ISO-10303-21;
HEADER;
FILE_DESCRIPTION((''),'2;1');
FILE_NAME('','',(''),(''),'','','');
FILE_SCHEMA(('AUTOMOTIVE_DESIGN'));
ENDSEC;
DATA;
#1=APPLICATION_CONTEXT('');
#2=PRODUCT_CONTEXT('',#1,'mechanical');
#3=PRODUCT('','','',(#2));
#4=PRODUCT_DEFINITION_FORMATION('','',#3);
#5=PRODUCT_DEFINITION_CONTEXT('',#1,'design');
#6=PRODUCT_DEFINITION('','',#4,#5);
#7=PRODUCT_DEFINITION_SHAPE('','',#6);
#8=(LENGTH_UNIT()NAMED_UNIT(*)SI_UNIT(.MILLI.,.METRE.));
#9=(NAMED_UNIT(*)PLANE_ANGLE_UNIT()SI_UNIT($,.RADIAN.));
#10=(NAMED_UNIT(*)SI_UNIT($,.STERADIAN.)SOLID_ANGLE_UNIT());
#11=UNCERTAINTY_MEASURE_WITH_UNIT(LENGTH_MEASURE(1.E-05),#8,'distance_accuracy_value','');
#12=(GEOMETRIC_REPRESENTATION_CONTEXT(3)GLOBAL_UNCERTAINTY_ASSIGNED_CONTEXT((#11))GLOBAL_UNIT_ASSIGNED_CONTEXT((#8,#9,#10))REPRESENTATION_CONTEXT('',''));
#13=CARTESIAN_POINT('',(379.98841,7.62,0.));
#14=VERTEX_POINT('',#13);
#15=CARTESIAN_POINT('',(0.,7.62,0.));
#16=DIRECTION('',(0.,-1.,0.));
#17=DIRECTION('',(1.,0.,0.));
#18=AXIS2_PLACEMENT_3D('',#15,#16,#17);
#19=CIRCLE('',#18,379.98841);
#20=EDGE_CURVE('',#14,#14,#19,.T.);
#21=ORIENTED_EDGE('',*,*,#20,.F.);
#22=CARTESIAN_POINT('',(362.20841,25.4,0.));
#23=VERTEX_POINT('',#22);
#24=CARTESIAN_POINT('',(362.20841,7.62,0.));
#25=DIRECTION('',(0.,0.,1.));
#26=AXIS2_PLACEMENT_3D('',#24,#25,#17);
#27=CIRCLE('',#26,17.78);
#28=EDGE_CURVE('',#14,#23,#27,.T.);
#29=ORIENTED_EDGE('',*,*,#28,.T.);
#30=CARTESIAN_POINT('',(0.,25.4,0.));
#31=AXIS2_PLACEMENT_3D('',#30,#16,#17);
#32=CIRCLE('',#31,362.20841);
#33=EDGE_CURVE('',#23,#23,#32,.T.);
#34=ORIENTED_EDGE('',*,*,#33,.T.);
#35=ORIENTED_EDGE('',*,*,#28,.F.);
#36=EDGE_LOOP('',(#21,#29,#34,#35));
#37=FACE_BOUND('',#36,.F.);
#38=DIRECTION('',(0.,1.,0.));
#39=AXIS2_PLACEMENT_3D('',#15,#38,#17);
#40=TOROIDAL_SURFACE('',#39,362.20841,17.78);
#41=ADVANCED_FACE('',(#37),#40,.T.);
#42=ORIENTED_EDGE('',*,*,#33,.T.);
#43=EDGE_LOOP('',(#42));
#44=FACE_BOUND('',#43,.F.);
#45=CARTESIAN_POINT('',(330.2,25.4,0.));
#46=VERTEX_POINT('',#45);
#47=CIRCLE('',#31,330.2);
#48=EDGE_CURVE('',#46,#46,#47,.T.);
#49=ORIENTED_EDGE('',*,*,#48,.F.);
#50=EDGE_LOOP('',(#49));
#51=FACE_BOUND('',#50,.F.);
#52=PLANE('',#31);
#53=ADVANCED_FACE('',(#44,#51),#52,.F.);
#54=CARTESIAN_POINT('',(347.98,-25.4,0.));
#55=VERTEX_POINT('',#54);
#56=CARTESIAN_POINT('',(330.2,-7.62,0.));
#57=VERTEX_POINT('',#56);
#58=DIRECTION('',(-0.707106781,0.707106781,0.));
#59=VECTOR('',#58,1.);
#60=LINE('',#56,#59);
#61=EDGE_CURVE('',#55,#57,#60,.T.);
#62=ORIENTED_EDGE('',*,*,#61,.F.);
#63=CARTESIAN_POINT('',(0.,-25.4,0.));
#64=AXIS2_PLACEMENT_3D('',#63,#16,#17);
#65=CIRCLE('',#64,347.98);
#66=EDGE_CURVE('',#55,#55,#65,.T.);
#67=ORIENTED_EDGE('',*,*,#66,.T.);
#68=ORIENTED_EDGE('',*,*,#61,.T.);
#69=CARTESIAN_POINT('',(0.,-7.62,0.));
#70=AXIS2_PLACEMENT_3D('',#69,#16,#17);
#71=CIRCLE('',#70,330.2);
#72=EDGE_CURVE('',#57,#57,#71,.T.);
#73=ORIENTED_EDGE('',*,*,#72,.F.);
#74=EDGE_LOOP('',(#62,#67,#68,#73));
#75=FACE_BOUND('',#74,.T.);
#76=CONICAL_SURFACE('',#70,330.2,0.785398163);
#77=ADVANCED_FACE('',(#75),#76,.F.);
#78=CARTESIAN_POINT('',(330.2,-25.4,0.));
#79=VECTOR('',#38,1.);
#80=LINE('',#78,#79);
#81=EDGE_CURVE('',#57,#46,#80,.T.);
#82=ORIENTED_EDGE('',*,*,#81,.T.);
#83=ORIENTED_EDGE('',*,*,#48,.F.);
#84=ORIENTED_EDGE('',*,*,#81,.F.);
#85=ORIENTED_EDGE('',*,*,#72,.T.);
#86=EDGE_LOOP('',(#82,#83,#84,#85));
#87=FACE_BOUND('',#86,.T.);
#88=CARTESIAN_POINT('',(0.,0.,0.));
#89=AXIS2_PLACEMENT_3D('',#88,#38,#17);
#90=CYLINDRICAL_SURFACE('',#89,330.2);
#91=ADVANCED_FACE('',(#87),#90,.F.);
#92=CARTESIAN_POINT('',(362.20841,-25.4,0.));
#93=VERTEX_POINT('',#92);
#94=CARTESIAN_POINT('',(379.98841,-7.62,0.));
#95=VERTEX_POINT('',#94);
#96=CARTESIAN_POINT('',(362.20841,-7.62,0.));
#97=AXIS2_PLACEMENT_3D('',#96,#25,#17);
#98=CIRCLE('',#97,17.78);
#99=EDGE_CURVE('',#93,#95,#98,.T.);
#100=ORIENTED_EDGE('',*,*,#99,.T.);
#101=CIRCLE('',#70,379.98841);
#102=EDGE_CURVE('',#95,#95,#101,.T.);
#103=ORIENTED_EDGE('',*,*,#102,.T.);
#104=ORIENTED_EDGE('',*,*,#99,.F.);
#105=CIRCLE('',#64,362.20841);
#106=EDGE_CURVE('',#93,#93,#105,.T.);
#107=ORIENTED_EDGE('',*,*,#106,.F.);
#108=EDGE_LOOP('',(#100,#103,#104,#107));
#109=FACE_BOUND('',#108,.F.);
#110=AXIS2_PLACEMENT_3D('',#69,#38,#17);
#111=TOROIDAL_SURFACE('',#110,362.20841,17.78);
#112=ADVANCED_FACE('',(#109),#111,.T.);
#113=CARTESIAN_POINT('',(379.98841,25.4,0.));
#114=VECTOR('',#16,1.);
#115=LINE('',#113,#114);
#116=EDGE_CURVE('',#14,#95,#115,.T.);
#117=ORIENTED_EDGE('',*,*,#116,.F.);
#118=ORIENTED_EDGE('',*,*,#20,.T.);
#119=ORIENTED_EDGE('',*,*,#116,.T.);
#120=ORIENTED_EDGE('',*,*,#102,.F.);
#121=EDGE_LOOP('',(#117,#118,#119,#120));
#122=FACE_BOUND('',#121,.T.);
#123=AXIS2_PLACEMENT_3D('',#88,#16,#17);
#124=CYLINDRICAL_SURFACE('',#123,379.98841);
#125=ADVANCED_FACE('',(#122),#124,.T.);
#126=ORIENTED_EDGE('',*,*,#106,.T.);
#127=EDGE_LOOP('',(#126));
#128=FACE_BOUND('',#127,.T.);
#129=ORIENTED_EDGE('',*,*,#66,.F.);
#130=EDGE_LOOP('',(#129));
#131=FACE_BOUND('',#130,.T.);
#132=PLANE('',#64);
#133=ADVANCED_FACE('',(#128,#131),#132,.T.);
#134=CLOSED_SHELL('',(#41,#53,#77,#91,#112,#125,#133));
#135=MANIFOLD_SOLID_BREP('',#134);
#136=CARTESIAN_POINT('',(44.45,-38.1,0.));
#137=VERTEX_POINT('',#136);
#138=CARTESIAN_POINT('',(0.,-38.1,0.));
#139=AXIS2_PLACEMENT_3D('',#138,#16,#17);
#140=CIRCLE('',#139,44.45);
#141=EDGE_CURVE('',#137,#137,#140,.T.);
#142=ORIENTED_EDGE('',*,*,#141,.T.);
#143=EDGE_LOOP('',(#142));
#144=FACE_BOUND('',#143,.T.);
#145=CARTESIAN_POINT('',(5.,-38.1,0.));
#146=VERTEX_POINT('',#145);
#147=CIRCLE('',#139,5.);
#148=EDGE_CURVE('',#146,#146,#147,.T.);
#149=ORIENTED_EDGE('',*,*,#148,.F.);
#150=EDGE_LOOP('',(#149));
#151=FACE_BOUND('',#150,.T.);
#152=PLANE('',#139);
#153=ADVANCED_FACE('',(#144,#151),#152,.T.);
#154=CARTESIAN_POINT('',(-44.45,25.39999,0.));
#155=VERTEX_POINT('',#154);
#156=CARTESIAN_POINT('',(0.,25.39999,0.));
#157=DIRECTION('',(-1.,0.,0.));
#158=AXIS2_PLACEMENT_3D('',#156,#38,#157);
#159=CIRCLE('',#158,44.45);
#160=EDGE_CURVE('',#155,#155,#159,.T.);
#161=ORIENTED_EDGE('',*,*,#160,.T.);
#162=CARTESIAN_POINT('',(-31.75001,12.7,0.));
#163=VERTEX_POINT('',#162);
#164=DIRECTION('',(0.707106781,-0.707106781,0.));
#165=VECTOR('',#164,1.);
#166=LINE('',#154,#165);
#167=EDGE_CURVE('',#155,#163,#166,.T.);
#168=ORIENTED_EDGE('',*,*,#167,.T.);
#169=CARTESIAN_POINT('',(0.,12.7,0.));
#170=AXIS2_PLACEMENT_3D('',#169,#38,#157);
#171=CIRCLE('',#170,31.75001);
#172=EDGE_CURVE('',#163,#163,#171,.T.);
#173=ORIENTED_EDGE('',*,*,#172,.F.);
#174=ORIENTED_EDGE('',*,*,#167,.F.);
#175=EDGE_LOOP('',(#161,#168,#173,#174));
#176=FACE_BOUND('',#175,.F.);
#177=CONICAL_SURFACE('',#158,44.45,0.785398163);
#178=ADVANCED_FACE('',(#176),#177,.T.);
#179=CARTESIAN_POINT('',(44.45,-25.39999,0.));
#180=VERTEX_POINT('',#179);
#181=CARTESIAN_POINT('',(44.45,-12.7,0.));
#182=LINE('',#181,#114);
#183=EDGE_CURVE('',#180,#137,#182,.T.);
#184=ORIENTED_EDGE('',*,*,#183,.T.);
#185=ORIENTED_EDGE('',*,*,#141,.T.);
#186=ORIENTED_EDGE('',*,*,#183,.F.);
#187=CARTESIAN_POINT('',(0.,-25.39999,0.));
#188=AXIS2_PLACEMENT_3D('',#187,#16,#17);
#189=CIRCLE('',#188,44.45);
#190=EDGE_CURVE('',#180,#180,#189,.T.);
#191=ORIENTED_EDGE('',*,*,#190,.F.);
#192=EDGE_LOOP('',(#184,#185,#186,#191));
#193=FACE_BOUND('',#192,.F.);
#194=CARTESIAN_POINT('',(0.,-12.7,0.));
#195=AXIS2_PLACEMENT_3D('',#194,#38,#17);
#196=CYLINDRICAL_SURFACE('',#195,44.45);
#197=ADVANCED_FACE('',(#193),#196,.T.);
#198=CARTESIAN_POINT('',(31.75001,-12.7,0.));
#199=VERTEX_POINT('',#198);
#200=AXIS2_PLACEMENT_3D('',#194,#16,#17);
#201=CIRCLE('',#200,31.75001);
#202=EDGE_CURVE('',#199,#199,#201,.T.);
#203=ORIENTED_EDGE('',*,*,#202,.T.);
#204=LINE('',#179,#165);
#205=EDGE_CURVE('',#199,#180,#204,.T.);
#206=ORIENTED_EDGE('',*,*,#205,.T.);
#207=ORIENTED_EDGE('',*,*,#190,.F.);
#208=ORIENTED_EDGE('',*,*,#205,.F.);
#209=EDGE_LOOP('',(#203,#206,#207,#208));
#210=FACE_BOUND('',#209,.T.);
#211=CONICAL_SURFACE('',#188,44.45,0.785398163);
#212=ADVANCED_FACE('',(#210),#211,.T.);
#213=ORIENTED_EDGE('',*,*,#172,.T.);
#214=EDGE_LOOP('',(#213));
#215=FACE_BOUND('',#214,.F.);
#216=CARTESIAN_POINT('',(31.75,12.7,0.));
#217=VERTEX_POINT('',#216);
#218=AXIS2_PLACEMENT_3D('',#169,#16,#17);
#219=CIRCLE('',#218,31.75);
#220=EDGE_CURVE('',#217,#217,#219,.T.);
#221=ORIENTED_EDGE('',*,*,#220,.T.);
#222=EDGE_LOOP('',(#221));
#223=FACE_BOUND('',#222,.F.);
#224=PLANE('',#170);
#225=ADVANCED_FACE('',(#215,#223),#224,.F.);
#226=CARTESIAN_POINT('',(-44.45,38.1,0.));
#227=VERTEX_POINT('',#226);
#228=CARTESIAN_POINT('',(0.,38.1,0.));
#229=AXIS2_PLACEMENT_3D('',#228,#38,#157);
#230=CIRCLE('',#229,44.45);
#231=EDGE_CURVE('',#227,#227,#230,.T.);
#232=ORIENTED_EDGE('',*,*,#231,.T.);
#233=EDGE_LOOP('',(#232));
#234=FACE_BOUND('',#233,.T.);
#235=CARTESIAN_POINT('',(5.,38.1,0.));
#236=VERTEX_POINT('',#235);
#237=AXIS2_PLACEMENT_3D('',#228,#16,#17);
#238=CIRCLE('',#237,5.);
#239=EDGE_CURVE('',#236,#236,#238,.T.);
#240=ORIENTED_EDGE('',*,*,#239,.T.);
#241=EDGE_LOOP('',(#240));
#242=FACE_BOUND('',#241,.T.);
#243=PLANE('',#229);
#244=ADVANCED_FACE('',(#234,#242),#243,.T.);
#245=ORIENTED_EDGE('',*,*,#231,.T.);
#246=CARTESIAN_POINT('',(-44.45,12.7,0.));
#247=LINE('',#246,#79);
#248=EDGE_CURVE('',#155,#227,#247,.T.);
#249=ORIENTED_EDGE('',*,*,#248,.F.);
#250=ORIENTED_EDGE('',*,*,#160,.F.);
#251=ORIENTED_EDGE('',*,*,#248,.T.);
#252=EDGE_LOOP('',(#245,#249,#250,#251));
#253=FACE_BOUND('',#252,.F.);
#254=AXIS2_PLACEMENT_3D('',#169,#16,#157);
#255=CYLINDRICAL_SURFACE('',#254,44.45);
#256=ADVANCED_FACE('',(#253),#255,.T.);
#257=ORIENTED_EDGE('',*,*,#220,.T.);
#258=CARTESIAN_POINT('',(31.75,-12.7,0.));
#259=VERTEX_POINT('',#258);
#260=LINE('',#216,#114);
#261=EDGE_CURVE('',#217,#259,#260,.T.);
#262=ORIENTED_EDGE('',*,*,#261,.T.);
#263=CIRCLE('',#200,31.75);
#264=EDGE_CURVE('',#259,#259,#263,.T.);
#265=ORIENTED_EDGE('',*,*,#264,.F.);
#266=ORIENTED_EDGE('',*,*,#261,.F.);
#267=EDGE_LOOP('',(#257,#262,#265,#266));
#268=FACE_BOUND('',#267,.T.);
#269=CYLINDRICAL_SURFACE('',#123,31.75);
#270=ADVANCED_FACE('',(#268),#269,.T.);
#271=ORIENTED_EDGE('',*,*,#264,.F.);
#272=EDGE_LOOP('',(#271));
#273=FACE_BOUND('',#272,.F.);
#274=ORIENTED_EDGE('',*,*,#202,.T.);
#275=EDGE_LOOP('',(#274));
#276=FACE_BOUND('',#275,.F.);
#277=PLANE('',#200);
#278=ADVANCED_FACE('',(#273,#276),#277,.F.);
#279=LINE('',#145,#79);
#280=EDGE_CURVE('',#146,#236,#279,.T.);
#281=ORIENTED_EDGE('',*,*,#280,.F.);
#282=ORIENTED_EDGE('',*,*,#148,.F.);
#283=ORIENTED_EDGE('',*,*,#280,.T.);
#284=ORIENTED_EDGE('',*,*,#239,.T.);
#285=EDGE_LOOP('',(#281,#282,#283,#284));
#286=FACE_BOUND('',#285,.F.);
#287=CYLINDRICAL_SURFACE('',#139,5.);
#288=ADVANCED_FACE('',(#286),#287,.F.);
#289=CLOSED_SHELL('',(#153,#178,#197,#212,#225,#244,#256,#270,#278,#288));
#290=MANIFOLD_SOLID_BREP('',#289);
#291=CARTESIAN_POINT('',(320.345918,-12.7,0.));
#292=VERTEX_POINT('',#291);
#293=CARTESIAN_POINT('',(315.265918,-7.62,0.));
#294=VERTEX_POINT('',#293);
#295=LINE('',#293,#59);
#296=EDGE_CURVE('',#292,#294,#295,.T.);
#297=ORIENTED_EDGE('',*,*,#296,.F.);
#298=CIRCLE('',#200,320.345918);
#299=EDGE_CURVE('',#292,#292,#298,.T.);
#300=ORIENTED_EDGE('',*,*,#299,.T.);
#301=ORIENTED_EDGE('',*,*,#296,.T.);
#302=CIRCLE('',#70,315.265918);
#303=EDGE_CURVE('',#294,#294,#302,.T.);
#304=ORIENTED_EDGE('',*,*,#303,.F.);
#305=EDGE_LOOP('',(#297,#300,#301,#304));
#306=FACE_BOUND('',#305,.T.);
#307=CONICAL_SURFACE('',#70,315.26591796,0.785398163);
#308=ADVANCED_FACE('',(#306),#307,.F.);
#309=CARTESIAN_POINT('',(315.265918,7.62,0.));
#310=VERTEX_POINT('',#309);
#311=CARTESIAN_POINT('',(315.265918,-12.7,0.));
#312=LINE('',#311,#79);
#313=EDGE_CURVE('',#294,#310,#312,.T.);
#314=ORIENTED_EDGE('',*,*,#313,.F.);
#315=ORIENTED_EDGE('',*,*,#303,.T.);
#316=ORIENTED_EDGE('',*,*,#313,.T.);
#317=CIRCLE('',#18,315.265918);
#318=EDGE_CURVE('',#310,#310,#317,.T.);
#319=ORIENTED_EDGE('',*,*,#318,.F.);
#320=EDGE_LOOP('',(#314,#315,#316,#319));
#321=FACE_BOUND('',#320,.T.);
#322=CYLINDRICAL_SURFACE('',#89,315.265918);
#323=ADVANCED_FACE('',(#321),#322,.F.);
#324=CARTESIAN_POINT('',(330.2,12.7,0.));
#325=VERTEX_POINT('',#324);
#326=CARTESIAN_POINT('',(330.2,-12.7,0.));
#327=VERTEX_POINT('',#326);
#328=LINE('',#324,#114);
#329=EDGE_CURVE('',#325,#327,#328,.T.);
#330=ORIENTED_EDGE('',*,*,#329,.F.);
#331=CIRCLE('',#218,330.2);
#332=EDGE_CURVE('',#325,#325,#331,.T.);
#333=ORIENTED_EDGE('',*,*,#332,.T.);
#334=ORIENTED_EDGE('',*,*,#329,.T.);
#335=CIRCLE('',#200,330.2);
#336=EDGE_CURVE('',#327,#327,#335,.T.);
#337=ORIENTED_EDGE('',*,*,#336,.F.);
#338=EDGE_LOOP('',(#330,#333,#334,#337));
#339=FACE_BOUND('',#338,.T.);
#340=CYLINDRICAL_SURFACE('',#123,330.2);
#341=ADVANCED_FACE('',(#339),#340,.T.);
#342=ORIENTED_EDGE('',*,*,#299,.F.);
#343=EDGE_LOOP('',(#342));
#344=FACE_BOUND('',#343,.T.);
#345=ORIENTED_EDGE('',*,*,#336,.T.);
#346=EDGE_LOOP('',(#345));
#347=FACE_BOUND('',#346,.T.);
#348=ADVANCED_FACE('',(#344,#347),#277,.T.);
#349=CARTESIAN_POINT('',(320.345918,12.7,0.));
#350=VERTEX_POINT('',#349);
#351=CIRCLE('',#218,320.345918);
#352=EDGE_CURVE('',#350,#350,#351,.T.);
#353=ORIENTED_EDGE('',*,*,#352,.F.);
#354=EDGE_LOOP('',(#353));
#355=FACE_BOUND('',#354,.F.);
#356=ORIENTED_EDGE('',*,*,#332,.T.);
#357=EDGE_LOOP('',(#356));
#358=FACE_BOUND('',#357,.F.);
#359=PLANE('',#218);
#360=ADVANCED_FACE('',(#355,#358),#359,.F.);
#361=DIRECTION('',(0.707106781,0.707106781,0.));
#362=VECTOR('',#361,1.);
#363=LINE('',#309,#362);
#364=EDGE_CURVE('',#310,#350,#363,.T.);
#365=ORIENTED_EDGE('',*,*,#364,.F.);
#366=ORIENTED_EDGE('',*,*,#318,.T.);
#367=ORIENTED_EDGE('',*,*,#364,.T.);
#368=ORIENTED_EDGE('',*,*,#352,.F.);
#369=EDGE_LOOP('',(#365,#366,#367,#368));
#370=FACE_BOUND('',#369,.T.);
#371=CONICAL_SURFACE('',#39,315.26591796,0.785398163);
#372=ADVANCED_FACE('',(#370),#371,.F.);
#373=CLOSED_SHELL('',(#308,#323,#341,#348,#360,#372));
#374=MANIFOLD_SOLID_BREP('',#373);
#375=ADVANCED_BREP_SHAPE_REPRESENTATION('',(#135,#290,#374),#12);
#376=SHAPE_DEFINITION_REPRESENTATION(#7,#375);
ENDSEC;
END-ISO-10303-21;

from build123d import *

# Parameters (mm, degrees)
F0_R      = 330.2
F0_R_2    = 315.2659179597
F1_DEPTH  = 12.7
F2_SIZE   = 5.08
F3_R      = 31.75
F4_DEPTH  = 12.7
F5_R      = 44.45
F6_DEPTH  = 25.4
F7_R      = 44.45
F8_DEPTH  = 25.4
F9_SIZE   = 12.69999
F10_R     = 5
F11_DEPTH = 101.6
F12_R     = 379.9884100113
F12_R_2   = 330.2
F13_DEPTH = 25.4
F14_SIZE  = 17.78
F15_R     = 17.78


# Not quite as in the source:
# - a fillet or chamfer is up to 0.001 mm smaller than in the source, because OpenCascade refuses the exact size


with BuildPart() as f1:
    # F0 (on Front) → F1 (new body, symmetric)
    with BuildSketch(Plane.XZ):
        Circle(F0_R)
        Circle(F0_R_2, mode=Mode.SUBTRACT)
    extrude(amount=F1_DEPTH, both=True)

    # F2
    f2_edges = [f1.edges().sort_by_distance(p)[0] for p in [
        (-315.265918, -12.7, 0),
        (-315.265918, 12.7, 0),
    ]]
    chamfer(f2_edges, length=F2_SIZE)


with BuildPart() as f4:
    # F3 (on Front) → F4 (new body, symmetric)
    with BuildSketch(Plane.XZ):
        Circle(F3_R)
    extrude(amount=F4_DEPTH, both=True)

    # F5 (on face) → F6 (join)
    with BuildSketch(Plane.XZ.offset(12.7)):
        Circle(F5_R)
    extrude(amount=F6_DEPTH)

    # F7 (on face) → F8 (join)
    with BuildSketch(Plane(origin=(0, 12.7, 0), x_dir=(-1, 0, 0), z_dir=(0, 1, 0))):
        Circle(F7_R)
    extrude(amount=F8_DEPTH)

    # F9 (size 12.7 in the source; OpenCascade refuses exactly that, so slightly less here)
    f9_edges = [f4.edges().sort_by_distance(p)[0] for p in [
        (-44.45, -12.7, 0),
        (44.45, 12.7, 0),
    ]]
    chamfer(f9_edges, length=F9_SIZE)

    # F10 (on face) → F11 (cut)
    with BuildSketch(Plane.XZ.offset(38.1)):
        Circle(F10_R)
    extrude(amount=-F11_DEPTH, mode=Mode.SUBTRACT)


with BuildPart() as f13:
    # F12 (on Front) → F13 (new body, symmetric)
    with BuildSketch(Plane.XZ):
        Circle(F12_R)
        Circle(F12_R_2, mode=Mode.SUBTRACT)
    extrude(amount=F13_DEPTH, both=True)

    # F14
    f14_edges = [f13.edges().sort_by_distance(p)[0] for p in [
        (-330.2, -25.4, 0),
    ]]
    chamfer(f14_edges, length=F14_SIZE)

    # F15
    f15_edges = [f13.edges().sort_by_distance(p)[0] for p in [
        (-379.98841, -25.4, 0),
        (-379.98841, 25.4, 0),
    ]]
    fillet(f15_edges, radius=F15_R)


solid = Compound([f1.part, f4.part, f13.part])
